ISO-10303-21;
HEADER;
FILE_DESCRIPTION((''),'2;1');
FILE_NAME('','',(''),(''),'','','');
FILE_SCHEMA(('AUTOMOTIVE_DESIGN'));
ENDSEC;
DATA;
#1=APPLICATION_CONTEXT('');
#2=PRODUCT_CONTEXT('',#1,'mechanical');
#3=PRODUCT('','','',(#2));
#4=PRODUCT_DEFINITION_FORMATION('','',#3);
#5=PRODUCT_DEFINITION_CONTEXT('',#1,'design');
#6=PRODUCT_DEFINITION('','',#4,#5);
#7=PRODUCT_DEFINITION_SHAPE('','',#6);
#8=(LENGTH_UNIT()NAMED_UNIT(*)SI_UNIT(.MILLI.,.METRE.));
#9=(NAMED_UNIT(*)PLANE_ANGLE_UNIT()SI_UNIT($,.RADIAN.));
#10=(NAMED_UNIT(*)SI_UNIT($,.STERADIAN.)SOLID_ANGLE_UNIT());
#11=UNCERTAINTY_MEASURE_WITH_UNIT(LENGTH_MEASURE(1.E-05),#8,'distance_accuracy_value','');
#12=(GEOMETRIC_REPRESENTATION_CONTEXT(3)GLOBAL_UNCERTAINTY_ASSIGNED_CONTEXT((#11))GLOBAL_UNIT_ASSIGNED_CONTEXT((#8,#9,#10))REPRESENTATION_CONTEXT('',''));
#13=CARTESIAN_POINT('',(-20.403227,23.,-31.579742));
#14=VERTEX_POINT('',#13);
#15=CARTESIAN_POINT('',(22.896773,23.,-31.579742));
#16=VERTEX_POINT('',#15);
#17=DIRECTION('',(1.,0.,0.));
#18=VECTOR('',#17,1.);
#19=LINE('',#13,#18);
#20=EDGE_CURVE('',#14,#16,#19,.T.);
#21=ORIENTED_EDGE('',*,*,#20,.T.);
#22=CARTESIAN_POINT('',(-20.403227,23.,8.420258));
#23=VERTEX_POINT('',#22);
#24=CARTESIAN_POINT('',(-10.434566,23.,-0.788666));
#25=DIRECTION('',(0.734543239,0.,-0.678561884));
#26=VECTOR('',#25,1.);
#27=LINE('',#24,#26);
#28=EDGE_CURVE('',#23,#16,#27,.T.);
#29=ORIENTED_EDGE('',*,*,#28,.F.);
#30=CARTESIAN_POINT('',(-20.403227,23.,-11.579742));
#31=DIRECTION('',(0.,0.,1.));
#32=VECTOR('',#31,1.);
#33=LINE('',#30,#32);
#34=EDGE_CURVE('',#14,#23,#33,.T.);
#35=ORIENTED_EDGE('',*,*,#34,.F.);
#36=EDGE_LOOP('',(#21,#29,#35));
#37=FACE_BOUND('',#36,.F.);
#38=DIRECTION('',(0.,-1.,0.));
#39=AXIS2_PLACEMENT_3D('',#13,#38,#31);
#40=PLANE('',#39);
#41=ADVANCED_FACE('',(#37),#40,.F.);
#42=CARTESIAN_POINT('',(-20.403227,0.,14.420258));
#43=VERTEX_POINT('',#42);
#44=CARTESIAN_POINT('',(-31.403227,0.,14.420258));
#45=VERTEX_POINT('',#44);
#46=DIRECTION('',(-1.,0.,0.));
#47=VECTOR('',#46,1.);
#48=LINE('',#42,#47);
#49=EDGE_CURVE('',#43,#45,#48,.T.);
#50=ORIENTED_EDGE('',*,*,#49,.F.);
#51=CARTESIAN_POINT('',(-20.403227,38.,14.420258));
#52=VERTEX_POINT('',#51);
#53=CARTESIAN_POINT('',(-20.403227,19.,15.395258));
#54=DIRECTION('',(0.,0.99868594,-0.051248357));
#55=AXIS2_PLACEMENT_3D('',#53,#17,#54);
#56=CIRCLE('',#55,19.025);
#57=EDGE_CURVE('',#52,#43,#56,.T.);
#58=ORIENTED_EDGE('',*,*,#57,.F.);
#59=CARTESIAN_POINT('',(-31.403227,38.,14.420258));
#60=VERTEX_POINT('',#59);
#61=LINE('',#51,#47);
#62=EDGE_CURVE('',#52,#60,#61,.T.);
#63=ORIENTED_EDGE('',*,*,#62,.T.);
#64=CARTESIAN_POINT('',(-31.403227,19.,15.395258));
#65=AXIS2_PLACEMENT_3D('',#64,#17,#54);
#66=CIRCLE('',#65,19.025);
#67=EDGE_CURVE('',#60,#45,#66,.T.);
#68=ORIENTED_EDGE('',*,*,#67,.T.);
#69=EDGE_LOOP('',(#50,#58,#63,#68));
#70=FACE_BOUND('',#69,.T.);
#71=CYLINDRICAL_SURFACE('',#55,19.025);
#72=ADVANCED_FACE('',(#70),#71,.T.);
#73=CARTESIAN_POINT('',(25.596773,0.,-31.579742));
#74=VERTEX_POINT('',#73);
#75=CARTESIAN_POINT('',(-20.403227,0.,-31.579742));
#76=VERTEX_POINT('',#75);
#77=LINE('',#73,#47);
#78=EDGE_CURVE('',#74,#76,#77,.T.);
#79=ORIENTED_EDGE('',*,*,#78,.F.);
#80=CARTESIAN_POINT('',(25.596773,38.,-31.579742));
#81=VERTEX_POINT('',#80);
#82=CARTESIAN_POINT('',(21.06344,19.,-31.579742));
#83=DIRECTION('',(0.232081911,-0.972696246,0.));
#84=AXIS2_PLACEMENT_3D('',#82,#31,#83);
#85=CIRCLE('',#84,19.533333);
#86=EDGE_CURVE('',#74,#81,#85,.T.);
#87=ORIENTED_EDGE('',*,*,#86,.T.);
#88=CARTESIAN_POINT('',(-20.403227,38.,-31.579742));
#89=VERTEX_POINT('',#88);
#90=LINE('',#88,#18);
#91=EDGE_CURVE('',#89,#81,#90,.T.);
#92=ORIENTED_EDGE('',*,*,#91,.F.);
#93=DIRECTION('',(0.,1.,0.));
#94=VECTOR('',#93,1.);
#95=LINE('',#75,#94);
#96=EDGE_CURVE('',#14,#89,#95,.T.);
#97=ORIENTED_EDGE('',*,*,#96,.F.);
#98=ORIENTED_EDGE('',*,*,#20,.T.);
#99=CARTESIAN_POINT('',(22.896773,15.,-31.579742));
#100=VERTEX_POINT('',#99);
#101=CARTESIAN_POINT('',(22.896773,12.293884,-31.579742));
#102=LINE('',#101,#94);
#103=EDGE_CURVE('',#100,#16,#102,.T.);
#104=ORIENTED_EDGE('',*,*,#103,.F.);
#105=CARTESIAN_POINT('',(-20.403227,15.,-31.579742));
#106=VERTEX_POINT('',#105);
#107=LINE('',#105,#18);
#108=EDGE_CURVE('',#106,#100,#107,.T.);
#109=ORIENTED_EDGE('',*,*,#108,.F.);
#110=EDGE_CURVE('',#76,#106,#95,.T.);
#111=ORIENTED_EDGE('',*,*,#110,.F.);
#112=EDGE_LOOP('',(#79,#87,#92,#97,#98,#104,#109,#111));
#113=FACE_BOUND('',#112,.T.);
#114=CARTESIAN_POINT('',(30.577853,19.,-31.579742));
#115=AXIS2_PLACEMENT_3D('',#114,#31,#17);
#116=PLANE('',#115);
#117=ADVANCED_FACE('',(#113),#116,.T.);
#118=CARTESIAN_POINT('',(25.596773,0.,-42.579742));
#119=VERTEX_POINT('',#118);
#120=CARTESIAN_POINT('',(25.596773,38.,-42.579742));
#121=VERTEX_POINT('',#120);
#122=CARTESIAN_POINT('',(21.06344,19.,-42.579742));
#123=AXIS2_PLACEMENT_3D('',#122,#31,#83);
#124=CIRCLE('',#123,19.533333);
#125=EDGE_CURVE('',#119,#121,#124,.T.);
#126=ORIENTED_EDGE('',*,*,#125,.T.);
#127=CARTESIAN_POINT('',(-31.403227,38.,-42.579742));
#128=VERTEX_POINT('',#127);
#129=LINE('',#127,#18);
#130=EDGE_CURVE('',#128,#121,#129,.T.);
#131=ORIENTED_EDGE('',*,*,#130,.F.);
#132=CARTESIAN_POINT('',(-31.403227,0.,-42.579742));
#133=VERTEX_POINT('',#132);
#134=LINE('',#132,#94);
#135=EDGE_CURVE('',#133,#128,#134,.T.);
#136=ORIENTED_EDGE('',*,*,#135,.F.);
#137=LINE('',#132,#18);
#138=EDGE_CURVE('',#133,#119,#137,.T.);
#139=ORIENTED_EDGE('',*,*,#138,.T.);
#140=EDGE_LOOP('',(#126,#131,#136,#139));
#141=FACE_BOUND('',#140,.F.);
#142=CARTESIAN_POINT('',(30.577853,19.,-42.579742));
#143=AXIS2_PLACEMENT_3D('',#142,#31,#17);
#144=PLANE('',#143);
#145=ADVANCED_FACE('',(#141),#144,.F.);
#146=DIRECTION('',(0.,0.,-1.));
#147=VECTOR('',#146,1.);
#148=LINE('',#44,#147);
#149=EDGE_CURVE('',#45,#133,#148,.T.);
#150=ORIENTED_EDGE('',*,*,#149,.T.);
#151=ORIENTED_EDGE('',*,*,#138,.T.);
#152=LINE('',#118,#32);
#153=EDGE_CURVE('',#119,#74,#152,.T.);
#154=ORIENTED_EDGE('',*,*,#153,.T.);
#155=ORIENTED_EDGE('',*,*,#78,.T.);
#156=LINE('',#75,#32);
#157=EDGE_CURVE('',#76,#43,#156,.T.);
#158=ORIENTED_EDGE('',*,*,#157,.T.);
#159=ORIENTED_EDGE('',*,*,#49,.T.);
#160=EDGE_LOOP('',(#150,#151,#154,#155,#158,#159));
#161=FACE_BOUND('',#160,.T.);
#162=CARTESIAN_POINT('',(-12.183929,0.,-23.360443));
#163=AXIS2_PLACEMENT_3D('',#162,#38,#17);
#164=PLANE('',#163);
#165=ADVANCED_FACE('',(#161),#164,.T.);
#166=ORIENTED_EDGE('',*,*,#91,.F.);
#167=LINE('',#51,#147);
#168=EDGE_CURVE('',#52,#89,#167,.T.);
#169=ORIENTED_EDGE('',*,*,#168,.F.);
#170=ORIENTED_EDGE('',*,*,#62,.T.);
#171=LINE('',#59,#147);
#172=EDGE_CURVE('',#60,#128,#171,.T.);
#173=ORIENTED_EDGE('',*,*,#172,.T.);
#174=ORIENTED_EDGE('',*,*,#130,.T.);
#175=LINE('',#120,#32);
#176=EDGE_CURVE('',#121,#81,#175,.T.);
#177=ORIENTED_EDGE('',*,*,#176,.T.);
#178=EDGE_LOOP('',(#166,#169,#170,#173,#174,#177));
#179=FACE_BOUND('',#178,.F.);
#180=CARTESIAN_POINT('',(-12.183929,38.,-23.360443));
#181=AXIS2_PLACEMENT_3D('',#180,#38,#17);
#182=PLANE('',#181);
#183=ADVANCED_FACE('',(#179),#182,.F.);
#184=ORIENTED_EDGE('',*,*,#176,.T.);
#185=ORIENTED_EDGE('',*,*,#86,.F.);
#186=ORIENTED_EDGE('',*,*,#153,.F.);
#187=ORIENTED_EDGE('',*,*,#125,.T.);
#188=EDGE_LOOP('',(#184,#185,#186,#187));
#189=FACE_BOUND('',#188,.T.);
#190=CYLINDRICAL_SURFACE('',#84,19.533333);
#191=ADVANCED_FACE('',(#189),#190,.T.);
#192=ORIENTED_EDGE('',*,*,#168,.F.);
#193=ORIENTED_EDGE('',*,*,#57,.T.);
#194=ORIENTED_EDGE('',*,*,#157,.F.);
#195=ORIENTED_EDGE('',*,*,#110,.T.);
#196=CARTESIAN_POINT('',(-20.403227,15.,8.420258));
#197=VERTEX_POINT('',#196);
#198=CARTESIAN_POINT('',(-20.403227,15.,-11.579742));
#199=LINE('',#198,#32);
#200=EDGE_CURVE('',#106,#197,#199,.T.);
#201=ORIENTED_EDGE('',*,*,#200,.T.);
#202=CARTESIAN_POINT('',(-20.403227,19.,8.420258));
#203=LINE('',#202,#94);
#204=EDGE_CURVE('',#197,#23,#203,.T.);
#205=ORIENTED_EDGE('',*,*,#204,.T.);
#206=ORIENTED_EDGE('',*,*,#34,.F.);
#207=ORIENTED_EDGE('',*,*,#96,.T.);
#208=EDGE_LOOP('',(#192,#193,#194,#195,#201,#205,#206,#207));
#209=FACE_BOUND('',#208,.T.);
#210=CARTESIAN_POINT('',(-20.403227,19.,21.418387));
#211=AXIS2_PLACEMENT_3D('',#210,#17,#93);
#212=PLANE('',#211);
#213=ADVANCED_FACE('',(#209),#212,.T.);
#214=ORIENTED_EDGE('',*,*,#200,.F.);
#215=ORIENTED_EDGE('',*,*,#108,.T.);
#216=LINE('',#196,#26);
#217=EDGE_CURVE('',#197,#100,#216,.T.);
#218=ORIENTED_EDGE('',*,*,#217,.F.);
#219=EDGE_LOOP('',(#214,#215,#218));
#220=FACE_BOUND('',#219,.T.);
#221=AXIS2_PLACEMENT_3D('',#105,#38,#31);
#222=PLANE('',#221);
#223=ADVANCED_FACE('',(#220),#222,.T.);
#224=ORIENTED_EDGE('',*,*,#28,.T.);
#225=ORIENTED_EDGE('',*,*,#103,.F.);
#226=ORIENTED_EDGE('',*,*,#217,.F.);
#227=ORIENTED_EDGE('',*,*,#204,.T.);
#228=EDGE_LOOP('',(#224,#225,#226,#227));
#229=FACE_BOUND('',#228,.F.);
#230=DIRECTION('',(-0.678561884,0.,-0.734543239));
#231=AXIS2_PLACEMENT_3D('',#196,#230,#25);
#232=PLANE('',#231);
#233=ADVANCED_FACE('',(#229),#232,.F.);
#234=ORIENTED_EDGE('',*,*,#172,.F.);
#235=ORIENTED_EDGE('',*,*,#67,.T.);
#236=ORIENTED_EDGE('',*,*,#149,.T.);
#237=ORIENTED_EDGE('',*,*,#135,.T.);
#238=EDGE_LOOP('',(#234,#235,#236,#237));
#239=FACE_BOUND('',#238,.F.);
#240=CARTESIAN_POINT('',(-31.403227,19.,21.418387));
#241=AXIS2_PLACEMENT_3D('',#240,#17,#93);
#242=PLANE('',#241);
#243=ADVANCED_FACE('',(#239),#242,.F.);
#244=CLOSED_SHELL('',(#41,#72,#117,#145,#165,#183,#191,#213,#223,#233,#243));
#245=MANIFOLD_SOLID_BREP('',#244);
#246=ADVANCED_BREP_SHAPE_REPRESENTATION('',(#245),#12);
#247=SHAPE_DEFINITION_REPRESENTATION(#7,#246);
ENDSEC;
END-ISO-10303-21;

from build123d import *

# Parameters (mm, degrees)
F1_DEPTH = 38
F2_W     = 8
F2_H     = 40
F3_DEPTH = 43.3
F5_DEPTH = 11
F7_DEPTH = 11
F9_DEPTH = 42.4


with BuildPart() as f1:
    # F0 (on Front) → F1 (new body)
    with BuildSketch(Plane.XZ):
        Polygon((-20.403226763, 14.420258379), (-31.403226763, 14.420258379), (-31.403226763, -42.579741621), (25.596773237, -42.579741621), (25.596773237, -31.579741621), (-20.403226763, -31.579741621), align=None)
    extrude(amount=-F1_DEPTH)

    # F2 (on face) → F3 (join)
    with BuildSketch(Plane.YZ.offset(-20.403226763)):
        Polygon((23, -31.579741621), (15, -31.579741621), (26, -37.2273437679), (34.1856418401, -37.2273437679), align=None)
        with Locations((19, -11.579741621)):
            Rectangle(F2_W, F2_H)
    extrude(amount=F3_DEPTH)

    # F4 (on face) → F5 (join)
    with BuildSketch(Plane.XY.offset(-31.579741621)):
        with BuildLine():
            Line((25.596773237, 38), (25.596773237, 0))
            ThreePointArc((25.596773237, 0), (40.596773237, 19), (25.596773237, 38))
        make_face()
    extrude(amount=-F5_DEPTH)

    # F6 (on face) → F7 (join)
    with BuildSketch(Plane.YZ.offset(-20.403226763)):
        with BuildLine():
            Line((0, 14.420258379), (38, 14.420258379))
            ThreePointArc((38, 14.420258379), (19, 34.420258379), (0, 14.420258379))
        make_face()
    extrude(amount=-F7_DEPTH)

    # F8 (on face) → F9 (cut)
    with BuildSketch(Plane.XZ.offset(-15)):
        Polygon((22.896773237, 8.420258379), (-20.403226763, 8.420258379), (22.896773237, -31.579741621), align=None)
    extrude(amount=-F9_DEPTH, mode=Mode.SUBTRACT)


solid = f1.part
